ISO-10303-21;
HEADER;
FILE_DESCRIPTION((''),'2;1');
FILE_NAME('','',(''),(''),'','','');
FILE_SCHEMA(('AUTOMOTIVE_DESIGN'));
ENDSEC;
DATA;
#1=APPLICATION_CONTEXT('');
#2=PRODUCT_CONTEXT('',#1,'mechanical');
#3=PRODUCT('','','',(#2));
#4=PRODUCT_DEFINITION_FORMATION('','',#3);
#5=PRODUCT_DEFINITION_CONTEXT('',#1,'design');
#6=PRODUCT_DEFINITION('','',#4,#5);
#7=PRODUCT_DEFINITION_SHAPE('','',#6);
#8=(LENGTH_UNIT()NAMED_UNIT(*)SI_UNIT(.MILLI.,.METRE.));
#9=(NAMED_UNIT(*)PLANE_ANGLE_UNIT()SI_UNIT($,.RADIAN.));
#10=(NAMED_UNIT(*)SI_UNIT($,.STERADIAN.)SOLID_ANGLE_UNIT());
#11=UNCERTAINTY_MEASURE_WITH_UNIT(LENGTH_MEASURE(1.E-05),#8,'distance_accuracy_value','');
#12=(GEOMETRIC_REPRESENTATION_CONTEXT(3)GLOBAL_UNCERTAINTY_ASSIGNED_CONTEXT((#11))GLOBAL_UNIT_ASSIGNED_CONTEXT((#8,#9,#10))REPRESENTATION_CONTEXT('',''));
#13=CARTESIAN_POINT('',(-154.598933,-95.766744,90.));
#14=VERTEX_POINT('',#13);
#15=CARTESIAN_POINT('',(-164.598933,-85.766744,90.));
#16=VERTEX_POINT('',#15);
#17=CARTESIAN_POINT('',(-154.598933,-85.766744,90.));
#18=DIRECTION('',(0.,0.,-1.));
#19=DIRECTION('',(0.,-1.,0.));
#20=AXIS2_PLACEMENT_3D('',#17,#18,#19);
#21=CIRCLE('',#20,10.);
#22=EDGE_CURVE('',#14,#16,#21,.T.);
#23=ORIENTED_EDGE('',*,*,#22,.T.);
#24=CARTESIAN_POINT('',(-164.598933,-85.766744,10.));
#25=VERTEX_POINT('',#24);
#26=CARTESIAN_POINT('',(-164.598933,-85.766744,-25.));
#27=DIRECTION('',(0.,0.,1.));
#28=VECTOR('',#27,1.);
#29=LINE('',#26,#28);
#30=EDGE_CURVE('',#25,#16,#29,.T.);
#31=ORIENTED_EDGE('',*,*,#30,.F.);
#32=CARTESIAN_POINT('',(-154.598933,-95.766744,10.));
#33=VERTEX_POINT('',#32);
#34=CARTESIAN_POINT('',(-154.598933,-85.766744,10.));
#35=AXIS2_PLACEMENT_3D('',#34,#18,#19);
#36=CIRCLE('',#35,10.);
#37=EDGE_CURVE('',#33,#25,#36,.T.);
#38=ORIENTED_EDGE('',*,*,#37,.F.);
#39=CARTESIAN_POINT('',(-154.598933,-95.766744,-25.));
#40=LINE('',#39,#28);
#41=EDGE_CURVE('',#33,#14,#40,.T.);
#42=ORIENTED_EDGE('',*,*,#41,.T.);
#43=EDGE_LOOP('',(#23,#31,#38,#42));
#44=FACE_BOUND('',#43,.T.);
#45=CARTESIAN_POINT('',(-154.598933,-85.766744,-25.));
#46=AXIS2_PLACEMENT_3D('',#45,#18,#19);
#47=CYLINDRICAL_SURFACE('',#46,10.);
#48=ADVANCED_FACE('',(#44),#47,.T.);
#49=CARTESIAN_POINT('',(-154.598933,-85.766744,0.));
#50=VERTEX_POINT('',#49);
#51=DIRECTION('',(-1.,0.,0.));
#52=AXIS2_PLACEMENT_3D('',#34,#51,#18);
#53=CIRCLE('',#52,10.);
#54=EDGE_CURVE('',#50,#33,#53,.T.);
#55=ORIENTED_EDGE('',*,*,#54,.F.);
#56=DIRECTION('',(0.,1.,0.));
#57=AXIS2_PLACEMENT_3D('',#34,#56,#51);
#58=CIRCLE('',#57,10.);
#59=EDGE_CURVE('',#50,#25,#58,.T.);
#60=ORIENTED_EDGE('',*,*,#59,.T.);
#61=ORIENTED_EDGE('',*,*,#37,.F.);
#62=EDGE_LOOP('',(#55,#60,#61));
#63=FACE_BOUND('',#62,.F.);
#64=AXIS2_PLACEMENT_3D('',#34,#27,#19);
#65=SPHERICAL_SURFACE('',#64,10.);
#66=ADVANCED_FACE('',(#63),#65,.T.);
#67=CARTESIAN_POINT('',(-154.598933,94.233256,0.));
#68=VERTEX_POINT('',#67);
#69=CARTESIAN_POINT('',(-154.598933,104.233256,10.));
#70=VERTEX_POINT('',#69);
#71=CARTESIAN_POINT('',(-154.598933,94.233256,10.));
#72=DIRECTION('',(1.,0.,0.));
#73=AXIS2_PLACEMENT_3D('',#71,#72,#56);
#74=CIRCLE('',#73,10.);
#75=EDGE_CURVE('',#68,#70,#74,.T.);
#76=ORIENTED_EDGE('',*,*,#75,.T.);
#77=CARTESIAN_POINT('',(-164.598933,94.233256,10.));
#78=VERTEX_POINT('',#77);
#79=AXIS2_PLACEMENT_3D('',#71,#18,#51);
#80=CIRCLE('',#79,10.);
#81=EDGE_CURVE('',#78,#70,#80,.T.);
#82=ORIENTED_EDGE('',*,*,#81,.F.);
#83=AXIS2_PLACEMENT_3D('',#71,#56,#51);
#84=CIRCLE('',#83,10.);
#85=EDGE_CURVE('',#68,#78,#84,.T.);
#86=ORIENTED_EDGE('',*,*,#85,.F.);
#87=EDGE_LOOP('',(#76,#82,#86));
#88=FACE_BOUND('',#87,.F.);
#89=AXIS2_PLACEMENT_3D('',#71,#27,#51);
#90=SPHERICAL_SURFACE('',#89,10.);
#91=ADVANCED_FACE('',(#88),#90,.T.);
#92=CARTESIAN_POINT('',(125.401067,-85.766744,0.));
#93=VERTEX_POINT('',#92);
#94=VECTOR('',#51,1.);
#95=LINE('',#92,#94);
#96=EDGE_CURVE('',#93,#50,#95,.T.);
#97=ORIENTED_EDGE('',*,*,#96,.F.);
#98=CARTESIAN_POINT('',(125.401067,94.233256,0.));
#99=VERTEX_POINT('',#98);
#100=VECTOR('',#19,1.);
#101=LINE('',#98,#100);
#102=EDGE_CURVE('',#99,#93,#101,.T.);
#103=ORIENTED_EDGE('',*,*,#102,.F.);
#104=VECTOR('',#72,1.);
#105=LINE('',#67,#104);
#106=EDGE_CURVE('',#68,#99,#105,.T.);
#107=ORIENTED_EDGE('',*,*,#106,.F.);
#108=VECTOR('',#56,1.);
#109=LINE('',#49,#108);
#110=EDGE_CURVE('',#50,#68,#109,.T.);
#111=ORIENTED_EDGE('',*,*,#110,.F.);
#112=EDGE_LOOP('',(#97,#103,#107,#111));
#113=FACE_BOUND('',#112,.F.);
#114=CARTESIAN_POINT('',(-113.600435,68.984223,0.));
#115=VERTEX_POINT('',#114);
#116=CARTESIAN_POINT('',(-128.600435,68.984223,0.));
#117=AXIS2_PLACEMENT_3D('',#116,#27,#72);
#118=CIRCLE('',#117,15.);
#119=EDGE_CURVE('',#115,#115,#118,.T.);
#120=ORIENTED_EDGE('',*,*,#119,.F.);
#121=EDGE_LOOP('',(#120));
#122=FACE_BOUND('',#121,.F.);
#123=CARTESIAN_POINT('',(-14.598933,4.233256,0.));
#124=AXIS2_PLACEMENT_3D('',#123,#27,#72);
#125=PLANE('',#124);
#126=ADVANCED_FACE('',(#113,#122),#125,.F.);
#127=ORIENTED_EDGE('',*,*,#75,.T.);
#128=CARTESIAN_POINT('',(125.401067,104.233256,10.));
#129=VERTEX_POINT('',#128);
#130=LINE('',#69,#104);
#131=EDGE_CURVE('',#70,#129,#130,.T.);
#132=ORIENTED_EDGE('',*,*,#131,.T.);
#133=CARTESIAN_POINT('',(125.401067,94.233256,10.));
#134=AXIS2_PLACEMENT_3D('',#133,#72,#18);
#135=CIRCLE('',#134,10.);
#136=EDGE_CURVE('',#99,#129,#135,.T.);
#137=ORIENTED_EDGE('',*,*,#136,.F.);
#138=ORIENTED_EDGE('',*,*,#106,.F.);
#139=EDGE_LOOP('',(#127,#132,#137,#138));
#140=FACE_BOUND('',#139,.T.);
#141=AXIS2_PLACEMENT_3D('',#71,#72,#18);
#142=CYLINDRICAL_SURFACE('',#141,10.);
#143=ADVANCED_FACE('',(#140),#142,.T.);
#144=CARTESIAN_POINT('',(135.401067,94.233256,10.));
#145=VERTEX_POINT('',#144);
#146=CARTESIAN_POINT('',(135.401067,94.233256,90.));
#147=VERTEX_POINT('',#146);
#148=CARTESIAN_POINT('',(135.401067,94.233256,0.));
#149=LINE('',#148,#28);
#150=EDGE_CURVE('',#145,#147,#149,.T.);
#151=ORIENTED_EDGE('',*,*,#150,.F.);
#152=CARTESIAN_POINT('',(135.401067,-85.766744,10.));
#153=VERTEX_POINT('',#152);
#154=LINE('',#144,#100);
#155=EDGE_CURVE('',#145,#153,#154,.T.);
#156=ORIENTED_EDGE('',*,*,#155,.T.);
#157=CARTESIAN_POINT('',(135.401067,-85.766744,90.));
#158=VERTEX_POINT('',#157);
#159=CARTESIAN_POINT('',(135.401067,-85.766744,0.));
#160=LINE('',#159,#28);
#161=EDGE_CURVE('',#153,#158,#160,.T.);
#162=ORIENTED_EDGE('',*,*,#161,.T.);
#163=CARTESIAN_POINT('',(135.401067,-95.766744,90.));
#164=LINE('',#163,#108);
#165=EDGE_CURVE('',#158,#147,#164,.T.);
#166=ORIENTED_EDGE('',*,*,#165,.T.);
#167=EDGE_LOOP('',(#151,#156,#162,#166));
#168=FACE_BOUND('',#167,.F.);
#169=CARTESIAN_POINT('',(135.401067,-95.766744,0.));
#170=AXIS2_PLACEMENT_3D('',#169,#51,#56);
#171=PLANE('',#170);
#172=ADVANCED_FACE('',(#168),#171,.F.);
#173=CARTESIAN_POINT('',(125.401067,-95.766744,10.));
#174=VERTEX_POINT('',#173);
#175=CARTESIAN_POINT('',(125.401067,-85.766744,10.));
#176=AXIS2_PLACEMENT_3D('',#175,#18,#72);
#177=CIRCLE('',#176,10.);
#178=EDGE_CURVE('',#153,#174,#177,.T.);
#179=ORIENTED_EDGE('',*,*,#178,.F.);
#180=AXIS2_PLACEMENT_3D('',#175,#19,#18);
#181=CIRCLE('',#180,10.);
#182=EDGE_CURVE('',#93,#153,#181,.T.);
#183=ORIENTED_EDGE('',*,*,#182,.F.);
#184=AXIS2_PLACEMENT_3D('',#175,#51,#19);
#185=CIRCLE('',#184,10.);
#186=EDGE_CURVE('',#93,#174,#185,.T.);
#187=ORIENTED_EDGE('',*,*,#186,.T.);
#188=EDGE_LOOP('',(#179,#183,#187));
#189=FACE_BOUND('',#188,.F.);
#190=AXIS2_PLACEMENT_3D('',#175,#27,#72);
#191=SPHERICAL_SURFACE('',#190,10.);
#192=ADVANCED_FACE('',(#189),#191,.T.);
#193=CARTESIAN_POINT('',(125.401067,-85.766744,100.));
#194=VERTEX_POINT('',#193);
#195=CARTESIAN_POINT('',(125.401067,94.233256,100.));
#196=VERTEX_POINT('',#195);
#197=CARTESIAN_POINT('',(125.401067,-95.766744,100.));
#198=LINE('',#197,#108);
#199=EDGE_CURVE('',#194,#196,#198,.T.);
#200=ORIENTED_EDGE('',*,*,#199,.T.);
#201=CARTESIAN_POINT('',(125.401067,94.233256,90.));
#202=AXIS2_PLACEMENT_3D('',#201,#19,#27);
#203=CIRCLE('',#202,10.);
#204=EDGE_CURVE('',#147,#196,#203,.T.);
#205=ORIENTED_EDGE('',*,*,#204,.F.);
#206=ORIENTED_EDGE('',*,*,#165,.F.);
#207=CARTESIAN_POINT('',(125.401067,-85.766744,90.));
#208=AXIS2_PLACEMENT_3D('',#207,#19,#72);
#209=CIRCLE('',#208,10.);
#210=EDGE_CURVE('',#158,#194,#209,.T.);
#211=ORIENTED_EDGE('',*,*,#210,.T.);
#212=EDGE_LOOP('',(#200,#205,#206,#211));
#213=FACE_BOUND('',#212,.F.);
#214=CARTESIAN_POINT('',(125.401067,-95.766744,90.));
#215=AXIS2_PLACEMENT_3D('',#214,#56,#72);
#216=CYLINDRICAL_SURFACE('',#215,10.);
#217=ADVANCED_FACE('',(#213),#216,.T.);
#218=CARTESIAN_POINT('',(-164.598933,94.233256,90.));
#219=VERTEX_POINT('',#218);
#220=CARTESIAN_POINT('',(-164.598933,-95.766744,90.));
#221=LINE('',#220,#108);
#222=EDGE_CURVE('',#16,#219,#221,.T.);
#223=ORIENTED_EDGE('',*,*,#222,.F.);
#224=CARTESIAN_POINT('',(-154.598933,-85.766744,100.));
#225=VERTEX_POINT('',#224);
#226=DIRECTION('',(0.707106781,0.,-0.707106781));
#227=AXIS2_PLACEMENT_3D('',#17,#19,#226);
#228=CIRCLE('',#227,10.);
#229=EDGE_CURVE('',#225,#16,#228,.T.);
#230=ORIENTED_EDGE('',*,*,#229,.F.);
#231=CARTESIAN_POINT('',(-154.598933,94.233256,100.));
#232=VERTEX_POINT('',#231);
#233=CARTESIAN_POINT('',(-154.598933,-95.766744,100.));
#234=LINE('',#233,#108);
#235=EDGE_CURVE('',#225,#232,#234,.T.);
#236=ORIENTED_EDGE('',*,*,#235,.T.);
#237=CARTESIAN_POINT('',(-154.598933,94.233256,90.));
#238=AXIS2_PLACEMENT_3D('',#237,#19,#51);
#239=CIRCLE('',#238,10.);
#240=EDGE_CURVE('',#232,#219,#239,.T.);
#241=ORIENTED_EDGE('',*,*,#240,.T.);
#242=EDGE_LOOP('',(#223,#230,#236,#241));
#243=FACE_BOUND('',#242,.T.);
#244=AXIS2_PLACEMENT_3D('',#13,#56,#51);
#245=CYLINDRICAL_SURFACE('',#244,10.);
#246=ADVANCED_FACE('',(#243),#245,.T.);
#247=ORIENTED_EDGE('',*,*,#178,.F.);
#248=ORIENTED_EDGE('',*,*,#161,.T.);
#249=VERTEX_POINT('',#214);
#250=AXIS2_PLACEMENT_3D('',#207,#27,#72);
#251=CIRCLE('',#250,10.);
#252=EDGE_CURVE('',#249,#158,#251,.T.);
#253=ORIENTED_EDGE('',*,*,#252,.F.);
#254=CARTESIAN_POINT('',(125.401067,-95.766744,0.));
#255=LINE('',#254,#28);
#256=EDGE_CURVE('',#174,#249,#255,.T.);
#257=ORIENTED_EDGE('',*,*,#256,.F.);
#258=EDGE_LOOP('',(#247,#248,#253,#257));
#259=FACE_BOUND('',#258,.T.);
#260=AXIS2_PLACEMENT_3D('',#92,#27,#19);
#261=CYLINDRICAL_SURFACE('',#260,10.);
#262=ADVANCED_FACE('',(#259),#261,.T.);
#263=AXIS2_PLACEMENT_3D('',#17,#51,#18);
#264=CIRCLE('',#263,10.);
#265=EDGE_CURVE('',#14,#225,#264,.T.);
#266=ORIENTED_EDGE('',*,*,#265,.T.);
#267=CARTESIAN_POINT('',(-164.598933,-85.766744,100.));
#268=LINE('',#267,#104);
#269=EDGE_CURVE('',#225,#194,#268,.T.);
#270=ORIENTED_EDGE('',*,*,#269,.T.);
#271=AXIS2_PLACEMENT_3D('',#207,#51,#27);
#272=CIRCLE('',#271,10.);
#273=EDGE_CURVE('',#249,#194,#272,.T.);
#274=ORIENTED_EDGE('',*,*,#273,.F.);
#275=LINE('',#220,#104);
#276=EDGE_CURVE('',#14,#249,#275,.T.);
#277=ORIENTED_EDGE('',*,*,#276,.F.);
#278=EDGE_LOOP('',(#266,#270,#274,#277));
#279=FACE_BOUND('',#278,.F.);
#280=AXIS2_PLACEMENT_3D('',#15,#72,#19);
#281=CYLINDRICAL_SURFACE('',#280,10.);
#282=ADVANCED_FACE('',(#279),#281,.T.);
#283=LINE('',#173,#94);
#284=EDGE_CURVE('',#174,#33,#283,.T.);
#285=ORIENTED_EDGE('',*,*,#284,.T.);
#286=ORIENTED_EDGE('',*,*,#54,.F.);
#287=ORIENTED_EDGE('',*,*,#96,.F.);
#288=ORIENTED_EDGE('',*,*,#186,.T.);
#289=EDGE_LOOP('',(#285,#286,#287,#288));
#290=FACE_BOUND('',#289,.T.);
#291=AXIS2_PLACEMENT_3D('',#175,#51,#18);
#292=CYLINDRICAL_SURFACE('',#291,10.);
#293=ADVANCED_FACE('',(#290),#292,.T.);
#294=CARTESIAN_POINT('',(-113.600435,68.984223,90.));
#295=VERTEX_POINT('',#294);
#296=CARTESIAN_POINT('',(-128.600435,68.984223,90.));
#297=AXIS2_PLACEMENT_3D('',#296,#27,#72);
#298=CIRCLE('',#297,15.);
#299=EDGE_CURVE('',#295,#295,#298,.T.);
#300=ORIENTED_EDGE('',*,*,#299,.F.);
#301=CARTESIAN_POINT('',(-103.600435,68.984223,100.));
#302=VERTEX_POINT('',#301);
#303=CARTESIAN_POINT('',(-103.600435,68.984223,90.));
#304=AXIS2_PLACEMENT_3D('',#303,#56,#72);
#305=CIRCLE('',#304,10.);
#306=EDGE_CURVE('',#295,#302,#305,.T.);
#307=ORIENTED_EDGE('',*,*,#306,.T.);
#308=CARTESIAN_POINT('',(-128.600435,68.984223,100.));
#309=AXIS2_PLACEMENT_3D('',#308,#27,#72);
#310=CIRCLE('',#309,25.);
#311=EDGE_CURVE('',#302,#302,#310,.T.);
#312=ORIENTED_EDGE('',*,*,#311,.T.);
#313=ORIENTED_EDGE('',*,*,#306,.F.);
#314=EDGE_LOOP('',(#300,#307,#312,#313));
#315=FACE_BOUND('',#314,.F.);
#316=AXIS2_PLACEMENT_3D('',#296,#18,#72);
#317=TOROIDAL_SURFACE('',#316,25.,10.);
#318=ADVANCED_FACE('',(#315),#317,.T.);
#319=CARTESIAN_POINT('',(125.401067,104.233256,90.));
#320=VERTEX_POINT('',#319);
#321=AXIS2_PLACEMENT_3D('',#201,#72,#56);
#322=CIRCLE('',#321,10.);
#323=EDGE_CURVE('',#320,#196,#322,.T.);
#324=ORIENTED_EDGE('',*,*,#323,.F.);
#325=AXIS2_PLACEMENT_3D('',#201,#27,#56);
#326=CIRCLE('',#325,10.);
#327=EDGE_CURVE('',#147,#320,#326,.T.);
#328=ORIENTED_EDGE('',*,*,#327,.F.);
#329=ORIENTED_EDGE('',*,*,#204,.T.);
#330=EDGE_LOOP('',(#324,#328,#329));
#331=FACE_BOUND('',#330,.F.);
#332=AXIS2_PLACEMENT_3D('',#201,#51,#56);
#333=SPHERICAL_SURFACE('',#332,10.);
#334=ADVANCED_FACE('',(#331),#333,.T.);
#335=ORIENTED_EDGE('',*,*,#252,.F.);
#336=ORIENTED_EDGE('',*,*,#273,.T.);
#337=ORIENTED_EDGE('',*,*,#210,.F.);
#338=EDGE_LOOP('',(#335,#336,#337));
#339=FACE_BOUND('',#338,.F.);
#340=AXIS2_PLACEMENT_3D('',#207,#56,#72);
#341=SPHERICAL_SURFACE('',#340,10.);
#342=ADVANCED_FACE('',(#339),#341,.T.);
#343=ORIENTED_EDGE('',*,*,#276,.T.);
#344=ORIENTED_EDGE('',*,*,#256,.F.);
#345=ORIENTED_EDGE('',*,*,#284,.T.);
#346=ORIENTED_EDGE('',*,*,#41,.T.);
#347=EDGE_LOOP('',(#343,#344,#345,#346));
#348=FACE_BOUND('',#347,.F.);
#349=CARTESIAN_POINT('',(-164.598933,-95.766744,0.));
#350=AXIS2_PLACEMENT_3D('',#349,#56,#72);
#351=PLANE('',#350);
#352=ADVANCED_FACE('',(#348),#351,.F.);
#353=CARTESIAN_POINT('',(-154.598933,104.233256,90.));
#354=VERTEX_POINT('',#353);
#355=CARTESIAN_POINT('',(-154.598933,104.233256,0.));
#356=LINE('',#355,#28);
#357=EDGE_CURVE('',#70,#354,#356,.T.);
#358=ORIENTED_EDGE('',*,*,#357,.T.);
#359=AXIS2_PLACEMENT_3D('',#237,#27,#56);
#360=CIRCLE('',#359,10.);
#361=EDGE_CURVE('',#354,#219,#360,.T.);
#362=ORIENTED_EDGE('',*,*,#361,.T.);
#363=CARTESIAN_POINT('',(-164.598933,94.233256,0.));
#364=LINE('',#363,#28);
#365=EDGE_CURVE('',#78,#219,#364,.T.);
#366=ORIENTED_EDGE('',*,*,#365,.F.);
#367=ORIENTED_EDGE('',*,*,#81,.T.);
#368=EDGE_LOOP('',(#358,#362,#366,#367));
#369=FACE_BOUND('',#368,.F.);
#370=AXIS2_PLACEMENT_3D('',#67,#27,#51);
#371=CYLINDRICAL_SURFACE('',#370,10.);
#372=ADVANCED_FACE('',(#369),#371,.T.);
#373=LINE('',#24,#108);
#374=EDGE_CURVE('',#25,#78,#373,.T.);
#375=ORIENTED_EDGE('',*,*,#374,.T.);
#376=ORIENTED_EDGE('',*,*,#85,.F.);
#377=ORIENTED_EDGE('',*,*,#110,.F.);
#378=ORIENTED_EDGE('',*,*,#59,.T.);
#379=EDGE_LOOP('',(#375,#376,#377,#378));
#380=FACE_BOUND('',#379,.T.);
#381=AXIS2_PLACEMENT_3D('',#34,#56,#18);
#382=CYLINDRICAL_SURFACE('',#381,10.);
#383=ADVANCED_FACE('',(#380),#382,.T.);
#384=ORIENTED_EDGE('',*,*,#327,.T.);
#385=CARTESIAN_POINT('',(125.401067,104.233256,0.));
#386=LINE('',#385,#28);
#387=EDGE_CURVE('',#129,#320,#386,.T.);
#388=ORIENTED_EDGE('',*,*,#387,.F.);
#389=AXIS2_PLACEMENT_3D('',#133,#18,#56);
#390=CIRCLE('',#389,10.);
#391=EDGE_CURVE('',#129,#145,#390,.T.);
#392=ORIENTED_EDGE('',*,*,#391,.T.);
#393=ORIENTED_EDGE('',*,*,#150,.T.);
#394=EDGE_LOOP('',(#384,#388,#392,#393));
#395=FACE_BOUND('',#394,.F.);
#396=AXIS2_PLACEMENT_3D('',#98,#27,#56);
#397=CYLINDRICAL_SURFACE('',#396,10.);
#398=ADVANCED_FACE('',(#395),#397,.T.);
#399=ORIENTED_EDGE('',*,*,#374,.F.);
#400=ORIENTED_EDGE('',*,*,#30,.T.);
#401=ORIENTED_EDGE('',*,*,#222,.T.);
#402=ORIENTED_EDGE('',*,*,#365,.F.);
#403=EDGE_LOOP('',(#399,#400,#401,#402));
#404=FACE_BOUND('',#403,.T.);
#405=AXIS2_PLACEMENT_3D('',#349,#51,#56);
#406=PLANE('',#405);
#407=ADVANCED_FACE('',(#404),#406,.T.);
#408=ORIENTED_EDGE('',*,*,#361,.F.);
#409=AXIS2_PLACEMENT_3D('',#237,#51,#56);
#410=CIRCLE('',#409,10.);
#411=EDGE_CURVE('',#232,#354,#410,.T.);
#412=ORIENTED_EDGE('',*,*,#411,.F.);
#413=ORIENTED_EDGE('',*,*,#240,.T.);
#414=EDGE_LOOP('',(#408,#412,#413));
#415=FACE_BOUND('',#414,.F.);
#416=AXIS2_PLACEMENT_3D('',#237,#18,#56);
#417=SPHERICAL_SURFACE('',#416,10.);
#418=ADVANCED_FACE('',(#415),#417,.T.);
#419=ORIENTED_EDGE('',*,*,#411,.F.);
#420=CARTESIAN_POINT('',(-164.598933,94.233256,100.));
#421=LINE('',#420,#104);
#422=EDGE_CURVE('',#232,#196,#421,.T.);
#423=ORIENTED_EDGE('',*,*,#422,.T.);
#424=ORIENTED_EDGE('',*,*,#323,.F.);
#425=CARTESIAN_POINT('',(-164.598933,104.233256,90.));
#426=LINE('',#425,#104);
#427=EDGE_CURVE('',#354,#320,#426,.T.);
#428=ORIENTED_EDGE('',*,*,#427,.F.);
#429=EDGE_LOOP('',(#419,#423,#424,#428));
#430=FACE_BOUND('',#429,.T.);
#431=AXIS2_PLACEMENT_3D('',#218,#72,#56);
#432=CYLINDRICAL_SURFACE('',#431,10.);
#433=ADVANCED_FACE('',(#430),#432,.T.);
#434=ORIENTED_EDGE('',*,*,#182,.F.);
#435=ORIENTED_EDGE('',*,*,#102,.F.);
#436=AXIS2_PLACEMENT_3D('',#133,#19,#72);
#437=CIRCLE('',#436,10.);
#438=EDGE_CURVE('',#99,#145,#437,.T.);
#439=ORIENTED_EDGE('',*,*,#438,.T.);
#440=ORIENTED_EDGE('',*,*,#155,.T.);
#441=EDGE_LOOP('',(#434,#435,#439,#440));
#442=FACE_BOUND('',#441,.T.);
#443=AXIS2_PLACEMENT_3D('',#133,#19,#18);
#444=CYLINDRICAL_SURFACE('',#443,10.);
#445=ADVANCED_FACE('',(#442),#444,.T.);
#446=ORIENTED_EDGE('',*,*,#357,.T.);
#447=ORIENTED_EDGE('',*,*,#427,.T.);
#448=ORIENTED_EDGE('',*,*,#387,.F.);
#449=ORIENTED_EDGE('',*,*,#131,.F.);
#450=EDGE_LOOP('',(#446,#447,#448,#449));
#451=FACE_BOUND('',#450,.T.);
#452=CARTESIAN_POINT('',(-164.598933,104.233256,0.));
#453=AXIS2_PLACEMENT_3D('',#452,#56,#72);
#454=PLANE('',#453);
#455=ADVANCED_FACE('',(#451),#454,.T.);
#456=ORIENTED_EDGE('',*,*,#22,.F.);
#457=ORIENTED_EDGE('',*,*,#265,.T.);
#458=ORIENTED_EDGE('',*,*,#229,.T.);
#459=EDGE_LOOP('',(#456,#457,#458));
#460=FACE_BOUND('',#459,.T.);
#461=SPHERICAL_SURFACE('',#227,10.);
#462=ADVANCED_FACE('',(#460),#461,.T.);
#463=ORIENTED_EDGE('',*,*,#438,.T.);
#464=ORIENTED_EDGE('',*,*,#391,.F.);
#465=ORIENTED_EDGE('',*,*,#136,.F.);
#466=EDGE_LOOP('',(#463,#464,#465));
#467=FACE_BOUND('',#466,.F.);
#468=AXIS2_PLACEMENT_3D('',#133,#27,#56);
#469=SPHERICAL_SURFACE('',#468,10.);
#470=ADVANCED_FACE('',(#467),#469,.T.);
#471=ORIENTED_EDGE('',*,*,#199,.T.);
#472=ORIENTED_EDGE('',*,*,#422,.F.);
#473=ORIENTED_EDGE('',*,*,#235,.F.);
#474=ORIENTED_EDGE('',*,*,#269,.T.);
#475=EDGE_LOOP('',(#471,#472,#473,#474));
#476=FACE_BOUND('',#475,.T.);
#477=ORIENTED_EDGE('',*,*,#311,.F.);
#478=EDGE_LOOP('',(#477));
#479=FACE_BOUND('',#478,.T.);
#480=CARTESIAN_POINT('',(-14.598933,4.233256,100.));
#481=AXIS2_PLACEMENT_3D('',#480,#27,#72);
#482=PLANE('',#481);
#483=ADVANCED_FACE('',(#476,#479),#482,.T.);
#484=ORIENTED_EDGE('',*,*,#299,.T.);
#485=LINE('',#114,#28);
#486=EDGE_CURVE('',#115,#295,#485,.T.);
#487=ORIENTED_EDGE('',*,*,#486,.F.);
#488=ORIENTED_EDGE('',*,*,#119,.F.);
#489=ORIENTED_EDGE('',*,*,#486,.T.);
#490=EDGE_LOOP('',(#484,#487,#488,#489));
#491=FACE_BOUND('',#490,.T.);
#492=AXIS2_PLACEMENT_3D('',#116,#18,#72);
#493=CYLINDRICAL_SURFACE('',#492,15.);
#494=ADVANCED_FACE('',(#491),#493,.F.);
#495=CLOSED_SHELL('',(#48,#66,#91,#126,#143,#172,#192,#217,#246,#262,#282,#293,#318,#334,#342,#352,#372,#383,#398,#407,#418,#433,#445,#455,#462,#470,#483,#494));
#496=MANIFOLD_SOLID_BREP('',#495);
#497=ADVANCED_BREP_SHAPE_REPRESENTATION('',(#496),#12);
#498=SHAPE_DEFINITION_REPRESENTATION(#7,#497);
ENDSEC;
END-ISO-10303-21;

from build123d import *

# Parameters (mm, degrees)
F0_W        = 300
F0_H        = 200
F0_R        = 15
F1_DEPTH    = 100
F2_R        = 10
F3_T1_DEPTH = 115
F3_S5_W     = 10
F3_S5_H     = 10
F3_T6_DEPTH = 10
F4_R        = 10


# Not quite as in the source:
# - a fillet or chamfer that OpenCascade refuses, or shapes differently, is made with other operations: its cross-section is extruded or revolved along the edge and cut away or added


with BuildPart() as f1:
    # F0 (on Top) → F1 (new body)
    with BuildSketch(Plane.XY):
        with Locations((-14.5989330485, 4.2332556737)):
            Rectangle(F0_W, F0_H)
        with Locations((-128.6004347833, 68.9842231594)):
            Circle(F0_R, mode=Mode.SUBTRACT)
    extrude(amount=F1_DEPTH)

    # F2
    f2_edges = [f1.edges().sort_by_distance(p)[0] for p in [
        (-164.598933, 104.233256, 50),
        (-14.598933, 104.233256, 100),
        (135.401067, 104.233256, 50),
        (135.401067, 4.233256, 100),
        (-164.598933, 4.233256, 100),
        (-143.600435, 68.984223, 100),
        (135.401067, -95.766744, 50),
        (-14.598933, -95.766744, 100),
    ]]
    fillet(f2_edges, radius=F2_R)

    # F3: fillet of radius 10 on 3 edges, made by hand

    # F3_s2 → F3_t1 (cut)
    with BuildSketch(Plane.XY.offset(-25)):
        with BuildLine():
            ThreePointArc((-154.5989330485, -95.7667443263), (-161.6700008604, -92.8378121382), (-164.5989330485, -85.7667443263))
            Line((-164.5989330485, -85.7667443263), (-164.5989330485, -95.7667443263))
            Line((-164.5989330485, -95.7667443263), (-154.5989330485, -95.7667443263))
        make_face()
    extrude(amount=F3_T1_DEPTH, mode=Mode.SUBTRACT)


with BuildPart() as f3_tool4:
    # F3_s5 → F3_t6 (new body)
    with BuildSketch(Plane.XZ.offset(85.7667443263)):
        with Locations((-159.5989330485, 95)):
            Rectangle(F3_S5_W, F3_S5_H)
    extrude(amount=F3_T6_DEPTH)

    # F3_s7 → F3_t8 (revolve, cut)
    with BuildSketch(Plane(origin=(-154.5989330485, -85.7667443263, 90), x_dir=(0.7071067812, 0, -0.7071067812), z_dir=(-0.7071067812, 0, -0.7071067812))):
        with BuildLine():
            ThreePointArc((0, -10), (10, 0), (0, 10))
            Line((0, 10), (0, -10))
        make_face()
    revolve(axis=Axis((-154.5989330485, -85.7667443263, 90), (0, -1, 0)), mode=Mode.SUBTRACT)


with BuildPart() as f1_1:
    add(f1.part)

    # F3_t3: cut F3_tool4
    add(f3_tool4.part, mode=Mode.SUBTRACT)

    # F4
    f4_edges = [f1_1.edges().sort_by_distance(p)[0] for p in [
        (125.401067, 104.233256, 45),
        (135.401067, 94.233256, 45),
        (-154.598933, 104.233256, 45),
        (-161.670001, 101.304323, 0),
        (-164.598933, 94.233256, 45),
        (-161.670001, 101.304323, 90),
    ]]
    fillet(f4_edges, radius=F4_R)


solid = f1_1.part
